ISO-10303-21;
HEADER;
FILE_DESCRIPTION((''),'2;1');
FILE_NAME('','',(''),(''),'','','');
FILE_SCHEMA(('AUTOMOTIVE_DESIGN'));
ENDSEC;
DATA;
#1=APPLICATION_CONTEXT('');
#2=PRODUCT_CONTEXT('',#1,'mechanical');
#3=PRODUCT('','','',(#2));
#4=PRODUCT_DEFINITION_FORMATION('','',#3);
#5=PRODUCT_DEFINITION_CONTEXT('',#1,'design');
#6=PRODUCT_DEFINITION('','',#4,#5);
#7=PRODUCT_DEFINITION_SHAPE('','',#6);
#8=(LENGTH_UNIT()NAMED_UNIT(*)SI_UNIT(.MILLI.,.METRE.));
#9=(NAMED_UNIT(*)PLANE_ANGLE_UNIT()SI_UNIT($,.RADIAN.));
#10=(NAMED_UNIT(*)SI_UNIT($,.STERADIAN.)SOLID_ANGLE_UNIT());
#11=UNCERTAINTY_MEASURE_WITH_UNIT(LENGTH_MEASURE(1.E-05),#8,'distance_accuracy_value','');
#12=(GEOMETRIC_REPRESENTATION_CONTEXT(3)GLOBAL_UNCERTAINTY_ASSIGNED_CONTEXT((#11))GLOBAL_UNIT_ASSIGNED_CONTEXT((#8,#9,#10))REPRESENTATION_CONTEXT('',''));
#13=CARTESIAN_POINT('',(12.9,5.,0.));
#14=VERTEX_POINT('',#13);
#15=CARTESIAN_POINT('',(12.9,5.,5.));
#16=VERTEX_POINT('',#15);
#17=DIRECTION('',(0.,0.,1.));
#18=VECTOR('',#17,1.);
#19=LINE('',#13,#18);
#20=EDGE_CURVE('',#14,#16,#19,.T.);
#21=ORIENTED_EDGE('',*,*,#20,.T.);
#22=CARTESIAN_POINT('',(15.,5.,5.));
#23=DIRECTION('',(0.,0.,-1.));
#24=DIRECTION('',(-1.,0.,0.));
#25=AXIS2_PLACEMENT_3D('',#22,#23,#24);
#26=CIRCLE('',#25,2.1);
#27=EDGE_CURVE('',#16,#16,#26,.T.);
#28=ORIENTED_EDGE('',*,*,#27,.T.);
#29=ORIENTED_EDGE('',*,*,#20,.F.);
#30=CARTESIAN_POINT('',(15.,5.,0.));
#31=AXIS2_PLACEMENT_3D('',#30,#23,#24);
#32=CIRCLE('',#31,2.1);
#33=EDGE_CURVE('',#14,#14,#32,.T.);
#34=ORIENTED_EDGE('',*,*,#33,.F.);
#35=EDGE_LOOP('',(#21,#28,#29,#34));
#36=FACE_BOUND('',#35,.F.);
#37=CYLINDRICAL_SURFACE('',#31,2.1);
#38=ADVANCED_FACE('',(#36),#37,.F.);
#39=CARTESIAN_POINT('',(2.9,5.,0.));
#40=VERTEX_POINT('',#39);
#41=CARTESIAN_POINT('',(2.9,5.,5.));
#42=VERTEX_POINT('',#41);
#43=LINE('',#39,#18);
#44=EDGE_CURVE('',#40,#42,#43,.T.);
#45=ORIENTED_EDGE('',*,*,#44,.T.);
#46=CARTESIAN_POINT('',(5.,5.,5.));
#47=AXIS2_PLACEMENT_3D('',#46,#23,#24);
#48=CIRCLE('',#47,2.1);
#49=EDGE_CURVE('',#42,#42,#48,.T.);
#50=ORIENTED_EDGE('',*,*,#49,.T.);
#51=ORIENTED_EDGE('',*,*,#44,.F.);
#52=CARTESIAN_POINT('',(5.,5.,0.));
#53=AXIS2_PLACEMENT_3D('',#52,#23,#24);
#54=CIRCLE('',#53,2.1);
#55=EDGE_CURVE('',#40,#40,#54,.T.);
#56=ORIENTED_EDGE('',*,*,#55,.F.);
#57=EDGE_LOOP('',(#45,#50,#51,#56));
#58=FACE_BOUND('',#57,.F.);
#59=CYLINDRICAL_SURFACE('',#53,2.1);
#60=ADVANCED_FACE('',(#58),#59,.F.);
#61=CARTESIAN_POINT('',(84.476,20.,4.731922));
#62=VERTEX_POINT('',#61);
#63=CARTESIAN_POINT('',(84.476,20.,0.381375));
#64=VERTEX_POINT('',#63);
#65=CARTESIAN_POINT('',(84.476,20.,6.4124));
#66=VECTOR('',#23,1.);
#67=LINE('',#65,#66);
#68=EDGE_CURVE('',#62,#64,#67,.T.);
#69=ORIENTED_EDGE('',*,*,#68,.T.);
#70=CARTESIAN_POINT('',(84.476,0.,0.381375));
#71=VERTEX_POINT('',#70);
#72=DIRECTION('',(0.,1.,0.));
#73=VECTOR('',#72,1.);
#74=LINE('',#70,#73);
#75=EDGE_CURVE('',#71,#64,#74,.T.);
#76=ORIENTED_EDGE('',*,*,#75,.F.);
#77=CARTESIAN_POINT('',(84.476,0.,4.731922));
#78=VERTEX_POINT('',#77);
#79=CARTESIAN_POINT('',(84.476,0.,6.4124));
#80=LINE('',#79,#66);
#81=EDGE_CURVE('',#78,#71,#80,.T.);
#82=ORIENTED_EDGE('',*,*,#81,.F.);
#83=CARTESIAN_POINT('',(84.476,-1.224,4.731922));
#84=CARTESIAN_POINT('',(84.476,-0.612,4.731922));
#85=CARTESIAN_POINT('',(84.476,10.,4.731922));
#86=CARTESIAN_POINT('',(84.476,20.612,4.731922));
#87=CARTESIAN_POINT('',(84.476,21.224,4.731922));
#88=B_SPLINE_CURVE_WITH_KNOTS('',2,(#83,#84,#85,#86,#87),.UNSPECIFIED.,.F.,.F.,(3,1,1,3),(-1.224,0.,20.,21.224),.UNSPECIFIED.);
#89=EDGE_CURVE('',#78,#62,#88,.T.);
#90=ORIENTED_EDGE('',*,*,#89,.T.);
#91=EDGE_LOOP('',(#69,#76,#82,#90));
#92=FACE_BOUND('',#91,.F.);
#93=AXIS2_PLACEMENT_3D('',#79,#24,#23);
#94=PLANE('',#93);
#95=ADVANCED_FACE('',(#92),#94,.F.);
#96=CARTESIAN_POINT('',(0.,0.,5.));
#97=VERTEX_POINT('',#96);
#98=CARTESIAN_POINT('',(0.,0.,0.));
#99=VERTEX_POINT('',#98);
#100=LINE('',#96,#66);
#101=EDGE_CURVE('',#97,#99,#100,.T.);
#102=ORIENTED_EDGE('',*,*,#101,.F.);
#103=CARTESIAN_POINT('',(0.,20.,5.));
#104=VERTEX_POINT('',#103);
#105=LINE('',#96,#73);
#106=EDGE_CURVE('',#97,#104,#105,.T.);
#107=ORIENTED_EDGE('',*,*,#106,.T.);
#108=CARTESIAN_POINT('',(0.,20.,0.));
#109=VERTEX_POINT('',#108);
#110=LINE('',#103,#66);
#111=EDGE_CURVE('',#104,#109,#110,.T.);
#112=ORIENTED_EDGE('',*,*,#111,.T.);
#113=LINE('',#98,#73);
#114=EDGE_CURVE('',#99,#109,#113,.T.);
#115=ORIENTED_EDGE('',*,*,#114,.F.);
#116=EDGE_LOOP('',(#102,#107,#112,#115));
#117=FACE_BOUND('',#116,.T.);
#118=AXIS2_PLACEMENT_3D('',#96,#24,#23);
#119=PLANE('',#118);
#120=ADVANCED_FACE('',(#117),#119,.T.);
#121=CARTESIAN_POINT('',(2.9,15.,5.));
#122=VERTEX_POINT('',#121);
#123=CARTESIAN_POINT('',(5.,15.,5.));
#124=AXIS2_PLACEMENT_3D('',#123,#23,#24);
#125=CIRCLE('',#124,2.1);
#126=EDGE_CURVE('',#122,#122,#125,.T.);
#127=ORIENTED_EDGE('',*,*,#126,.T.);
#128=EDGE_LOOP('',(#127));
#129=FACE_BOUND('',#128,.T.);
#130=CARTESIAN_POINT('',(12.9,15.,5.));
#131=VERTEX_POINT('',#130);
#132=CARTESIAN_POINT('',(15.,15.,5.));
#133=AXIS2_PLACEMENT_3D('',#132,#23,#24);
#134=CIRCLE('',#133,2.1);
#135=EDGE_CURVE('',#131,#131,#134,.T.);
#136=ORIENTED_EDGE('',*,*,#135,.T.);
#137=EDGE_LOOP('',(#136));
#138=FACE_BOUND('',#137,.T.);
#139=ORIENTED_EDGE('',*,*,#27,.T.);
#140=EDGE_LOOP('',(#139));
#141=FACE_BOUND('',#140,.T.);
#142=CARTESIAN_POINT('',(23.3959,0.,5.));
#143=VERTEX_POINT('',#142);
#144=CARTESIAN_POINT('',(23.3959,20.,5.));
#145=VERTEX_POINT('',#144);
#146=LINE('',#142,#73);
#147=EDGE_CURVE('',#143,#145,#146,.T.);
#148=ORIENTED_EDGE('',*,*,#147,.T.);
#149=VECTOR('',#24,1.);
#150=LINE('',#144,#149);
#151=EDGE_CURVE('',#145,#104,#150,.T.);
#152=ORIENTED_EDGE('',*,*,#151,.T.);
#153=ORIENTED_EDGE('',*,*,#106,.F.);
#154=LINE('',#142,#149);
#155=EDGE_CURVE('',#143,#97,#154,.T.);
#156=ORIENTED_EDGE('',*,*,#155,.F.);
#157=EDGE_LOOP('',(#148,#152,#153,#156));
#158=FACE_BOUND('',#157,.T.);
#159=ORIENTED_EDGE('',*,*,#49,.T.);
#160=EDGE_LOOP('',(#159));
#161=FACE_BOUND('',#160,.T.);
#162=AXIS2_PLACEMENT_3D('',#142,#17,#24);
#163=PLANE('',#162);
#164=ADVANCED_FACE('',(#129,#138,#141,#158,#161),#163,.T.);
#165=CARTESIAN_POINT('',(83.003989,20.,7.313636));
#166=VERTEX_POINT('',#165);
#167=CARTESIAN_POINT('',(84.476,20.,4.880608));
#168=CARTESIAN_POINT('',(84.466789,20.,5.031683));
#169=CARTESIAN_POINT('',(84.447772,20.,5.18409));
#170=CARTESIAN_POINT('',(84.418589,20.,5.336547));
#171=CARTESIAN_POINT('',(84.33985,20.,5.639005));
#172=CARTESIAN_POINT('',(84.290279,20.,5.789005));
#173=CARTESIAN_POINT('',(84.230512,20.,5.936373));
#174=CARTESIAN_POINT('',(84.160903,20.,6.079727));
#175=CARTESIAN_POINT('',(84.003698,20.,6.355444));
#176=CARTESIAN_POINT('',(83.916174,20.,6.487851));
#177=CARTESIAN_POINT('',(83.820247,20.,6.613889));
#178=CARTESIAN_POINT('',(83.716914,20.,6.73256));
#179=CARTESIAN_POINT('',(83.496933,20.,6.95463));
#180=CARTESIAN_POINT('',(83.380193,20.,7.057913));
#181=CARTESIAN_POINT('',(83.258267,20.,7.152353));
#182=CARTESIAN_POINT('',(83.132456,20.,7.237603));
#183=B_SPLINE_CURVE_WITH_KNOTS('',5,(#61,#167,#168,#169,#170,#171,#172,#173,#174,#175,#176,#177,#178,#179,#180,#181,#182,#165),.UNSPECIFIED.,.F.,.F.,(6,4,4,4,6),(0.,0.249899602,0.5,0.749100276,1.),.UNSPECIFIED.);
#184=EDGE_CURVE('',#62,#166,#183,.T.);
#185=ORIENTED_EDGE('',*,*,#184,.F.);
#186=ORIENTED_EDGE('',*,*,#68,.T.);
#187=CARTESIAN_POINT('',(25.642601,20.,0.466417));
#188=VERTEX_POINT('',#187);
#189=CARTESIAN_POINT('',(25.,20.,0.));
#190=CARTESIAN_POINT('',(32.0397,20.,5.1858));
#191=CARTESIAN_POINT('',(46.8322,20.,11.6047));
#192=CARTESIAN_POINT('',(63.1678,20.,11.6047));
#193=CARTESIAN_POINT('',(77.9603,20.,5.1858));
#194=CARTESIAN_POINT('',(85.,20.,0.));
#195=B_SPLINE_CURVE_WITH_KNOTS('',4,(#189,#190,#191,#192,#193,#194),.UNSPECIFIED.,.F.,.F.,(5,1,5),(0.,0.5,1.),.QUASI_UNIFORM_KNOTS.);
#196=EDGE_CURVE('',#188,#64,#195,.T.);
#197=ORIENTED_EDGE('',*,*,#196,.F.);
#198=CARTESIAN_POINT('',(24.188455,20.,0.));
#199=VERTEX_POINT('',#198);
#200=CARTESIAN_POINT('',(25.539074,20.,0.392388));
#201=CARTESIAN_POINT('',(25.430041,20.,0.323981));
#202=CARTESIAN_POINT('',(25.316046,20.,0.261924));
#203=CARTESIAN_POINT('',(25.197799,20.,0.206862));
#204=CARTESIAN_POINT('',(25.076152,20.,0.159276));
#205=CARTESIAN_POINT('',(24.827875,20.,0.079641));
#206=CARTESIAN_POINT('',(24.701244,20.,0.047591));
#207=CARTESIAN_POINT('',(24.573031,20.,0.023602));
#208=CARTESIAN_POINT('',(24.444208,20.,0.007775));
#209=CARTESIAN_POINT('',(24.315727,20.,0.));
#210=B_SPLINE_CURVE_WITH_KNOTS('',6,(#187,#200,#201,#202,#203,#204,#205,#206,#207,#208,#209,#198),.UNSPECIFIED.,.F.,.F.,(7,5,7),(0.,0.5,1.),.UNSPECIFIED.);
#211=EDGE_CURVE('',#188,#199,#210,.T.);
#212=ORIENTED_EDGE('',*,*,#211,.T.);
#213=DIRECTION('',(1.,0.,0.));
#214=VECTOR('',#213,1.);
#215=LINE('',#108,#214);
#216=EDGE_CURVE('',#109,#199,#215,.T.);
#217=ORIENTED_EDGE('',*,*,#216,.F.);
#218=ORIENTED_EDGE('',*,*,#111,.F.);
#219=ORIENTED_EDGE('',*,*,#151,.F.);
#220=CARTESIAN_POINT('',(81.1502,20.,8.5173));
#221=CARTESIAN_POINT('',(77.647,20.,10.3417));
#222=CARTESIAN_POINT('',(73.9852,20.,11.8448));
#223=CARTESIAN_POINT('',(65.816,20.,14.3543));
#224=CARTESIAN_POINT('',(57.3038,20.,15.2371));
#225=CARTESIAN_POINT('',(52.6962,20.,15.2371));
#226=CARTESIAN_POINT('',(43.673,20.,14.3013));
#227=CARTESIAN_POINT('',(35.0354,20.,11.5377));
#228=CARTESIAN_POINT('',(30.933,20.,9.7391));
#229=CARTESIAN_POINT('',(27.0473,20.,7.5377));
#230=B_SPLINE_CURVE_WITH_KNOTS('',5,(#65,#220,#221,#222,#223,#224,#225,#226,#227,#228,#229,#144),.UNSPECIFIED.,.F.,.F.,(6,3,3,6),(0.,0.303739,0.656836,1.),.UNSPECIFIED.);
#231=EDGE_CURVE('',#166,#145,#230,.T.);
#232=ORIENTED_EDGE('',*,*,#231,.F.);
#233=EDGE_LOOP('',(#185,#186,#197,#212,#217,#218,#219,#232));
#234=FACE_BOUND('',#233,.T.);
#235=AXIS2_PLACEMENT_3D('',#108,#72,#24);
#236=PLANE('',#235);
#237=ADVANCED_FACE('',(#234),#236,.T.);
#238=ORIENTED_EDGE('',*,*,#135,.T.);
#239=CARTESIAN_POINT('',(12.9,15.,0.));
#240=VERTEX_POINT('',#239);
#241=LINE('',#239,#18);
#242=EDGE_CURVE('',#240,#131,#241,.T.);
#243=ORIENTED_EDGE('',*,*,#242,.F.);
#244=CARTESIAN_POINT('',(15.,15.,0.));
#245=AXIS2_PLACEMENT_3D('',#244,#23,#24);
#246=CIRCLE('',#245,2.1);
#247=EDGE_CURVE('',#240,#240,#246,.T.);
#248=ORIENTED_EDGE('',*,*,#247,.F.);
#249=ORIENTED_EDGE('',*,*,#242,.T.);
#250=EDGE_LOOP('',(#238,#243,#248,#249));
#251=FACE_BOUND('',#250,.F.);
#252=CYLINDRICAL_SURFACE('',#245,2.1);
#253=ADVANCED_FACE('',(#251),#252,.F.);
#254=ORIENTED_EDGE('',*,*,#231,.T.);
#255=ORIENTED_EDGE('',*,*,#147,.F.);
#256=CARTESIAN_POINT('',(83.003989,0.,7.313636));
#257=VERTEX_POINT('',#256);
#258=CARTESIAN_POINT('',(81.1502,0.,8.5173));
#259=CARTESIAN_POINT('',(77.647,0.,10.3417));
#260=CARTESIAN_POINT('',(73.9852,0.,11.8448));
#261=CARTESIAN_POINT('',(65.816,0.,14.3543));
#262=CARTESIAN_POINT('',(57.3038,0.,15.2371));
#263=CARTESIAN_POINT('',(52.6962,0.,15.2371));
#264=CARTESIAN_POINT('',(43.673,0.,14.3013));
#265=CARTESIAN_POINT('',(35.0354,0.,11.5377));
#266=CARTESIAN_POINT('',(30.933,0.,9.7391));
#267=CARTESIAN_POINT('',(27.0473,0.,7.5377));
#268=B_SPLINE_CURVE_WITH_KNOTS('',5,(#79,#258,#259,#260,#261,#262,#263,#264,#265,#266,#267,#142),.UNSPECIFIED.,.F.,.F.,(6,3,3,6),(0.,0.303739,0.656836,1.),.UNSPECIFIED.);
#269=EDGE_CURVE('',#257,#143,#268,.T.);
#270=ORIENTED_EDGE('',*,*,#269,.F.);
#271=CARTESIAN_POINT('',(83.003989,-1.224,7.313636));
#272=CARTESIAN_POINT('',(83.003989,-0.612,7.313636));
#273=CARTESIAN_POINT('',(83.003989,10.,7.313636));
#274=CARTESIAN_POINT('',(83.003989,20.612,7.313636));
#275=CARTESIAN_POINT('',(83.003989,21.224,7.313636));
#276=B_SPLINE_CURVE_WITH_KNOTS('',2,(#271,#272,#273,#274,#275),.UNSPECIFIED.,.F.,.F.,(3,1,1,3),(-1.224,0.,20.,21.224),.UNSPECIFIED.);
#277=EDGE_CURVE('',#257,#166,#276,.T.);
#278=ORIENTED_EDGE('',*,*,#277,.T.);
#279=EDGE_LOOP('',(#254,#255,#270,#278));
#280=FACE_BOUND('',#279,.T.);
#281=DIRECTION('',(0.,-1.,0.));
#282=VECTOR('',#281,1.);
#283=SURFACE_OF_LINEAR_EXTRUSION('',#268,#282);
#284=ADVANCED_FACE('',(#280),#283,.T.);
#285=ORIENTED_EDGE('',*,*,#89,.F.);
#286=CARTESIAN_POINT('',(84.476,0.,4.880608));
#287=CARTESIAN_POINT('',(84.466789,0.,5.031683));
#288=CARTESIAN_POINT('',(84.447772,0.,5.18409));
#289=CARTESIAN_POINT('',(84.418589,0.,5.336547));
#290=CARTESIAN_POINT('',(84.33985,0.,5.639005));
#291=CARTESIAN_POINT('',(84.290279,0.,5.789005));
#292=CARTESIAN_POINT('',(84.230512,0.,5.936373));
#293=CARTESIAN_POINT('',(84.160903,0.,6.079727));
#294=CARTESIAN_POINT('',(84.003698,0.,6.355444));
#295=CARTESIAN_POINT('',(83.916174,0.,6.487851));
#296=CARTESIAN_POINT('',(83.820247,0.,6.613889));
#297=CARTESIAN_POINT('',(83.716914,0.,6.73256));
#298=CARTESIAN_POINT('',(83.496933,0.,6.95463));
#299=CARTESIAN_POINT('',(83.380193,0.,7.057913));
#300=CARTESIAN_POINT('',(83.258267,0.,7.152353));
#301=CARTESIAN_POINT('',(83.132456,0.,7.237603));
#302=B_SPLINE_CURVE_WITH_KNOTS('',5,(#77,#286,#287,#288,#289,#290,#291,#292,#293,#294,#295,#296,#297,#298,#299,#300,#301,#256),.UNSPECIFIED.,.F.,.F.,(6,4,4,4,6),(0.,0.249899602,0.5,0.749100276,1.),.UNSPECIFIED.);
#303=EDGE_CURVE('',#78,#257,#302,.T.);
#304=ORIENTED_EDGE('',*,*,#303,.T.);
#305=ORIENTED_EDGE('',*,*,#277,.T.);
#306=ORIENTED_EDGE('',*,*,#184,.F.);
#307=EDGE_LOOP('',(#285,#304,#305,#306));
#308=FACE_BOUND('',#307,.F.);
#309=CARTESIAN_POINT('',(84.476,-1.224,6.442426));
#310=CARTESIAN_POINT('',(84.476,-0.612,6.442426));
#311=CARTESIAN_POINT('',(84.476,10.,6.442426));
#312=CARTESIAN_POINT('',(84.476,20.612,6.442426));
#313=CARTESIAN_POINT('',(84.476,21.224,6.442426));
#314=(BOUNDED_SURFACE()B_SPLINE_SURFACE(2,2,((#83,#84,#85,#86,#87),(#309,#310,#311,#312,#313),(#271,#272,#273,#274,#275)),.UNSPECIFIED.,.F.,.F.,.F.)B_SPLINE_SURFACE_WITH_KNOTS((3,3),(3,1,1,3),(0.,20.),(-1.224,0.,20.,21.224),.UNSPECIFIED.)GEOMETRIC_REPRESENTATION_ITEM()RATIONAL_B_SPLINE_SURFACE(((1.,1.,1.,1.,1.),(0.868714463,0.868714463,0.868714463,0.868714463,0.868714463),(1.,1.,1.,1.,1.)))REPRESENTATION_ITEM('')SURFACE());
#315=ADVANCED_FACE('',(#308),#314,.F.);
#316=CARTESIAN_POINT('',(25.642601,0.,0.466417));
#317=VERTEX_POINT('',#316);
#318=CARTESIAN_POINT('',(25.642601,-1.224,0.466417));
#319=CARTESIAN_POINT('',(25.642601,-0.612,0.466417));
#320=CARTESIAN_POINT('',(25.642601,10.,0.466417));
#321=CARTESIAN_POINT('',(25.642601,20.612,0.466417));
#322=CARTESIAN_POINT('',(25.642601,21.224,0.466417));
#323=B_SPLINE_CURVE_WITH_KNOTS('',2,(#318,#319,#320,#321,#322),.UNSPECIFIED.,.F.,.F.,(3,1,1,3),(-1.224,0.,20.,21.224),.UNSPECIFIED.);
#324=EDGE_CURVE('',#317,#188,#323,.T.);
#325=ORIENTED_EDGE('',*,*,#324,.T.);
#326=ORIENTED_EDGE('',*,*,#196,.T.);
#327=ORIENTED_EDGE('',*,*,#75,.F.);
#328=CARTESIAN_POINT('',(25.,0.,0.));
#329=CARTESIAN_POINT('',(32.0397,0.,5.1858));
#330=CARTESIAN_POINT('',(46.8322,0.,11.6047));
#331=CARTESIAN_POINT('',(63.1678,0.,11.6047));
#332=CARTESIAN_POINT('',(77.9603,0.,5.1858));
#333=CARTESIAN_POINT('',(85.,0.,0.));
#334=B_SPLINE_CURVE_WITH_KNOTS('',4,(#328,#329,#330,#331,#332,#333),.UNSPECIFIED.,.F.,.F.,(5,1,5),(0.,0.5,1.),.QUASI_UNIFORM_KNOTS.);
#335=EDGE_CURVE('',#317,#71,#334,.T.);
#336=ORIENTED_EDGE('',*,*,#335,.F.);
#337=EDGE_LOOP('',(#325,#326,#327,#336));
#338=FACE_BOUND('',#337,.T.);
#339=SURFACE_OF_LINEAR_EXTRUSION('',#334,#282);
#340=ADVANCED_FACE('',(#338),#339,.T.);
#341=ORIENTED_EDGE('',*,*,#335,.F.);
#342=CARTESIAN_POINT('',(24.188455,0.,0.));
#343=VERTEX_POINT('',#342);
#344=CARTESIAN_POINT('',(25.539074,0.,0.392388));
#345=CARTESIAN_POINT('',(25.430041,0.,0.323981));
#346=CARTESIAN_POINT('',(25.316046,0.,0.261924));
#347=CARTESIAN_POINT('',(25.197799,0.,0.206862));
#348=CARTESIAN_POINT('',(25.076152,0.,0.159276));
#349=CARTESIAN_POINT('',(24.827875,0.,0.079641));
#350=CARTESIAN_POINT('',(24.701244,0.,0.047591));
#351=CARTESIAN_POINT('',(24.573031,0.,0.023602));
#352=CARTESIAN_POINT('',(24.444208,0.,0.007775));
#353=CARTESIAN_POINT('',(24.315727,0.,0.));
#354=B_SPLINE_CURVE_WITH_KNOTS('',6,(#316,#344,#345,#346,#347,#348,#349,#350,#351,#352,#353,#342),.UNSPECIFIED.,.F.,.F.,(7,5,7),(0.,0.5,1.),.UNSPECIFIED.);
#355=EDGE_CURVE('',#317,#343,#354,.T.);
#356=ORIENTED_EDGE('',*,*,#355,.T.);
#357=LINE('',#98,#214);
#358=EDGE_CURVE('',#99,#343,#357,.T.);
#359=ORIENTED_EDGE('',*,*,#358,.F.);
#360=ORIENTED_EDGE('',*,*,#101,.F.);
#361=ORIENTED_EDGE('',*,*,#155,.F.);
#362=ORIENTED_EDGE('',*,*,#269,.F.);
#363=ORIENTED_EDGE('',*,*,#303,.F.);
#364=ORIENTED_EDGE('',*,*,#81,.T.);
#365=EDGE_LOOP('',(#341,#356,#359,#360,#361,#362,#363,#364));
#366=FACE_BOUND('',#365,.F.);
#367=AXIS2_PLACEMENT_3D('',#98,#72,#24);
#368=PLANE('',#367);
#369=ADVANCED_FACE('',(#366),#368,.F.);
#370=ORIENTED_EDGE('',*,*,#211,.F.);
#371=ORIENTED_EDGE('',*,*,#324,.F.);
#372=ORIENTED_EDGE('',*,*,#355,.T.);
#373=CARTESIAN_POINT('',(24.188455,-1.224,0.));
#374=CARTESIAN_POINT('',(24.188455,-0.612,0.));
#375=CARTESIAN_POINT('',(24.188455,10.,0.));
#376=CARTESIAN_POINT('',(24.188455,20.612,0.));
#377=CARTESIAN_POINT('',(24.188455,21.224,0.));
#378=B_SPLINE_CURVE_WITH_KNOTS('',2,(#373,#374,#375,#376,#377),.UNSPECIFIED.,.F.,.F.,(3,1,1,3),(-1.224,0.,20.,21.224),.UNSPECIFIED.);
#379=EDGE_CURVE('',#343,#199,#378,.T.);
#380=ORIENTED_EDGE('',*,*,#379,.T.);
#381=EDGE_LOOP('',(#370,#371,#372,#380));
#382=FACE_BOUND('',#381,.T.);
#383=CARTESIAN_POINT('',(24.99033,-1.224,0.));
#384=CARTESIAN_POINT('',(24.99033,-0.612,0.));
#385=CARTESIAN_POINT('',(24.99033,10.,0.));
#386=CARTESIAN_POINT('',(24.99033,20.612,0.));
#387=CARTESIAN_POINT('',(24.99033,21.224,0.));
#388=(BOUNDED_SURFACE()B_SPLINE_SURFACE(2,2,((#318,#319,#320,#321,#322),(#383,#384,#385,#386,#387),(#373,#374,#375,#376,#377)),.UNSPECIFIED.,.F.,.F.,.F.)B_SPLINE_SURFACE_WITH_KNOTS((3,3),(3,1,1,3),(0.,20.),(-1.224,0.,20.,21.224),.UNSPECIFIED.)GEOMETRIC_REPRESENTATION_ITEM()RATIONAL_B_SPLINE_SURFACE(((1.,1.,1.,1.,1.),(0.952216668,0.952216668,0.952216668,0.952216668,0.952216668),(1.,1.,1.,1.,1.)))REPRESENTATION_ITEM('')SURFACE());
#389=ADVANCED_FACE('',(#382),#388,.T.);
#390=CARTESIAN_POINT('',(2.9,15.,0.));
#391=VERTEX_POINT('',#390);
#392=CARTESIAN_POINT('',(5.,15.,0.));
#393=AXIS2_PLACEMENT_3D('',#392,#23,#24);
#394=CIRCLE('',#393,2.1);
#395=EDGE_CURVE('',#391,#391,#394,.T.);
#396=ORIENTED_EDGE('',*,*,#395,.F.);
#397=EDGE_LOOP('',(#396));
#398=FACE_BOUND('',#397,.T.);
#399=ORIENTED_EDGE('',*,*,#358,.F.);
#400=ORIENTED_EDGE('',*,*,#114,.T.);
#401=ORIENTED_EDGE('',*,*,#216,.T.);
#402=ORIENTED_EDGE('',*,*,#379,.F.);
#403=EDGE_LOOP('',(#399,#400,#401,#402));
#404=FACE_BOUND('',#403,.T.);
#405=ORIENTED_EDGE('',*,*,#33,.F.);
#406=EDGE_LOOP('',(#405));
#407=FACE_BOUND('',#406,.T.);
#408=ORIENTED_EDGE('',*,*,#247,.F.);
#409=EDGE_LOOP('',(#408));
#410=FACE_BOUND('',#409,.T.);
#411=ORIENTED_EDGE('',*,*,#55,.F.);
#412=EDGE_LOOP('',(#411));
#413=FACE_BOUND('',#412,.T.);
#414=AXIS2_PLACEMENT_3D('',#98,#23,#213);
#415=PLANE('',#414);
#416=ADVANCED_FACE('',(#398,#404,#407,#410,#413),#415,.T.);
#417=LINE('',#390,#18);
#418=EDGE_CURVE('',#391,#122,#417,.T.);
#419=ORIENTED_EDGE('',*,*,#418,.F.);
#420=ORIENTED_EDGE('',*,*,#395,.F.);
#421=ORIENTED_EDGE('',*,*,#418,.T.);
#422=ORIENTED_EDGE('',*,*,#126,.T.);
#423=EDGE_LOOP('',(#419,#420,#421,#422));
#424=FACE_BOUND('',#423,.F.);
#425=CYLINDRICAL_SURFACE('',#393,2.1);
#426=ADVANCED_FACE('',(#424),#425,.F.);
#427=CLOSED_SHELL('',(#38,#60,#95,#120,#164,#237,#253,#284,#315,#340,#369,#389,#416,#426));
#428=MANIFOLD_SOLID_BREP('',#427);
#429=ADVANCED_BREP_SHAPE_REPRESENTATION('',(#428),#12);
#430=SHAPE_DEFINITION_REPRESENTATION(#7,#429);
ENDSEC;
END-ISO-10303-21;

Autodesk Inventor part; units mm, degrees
ref_plane "YZ Plane" through (0, 0, 0) normal (1, 0, 0) x (0, 1, 0)
ref_plane "XZ Plane" through (0, 0, 0) normal (0, 1, 0) x (-1, 0, 0)
ref_plane "XY Plane" through (0, 0, 0) normal (0, 0, 1) x (1, 0, 0)
sketch "Sketch1" plane through (0, 0, 0) normal (0, 1, 0) x (-1, 0, 0)
  line L0 (0, 0) -> (-25, 0)
  spline S0 degree 4 poles (-25, 0) (-32.0397, 5.1858) (-46.8322, 11.6047) (-63.1678, 11.6047) (-77.9603, 5.1858) (-85, 0) knots 0 0 0 0 0 0.5 1 1 1 1 1
  line L1 (-48.6479, 10) -> (-61.3521, 10) construction
  arc A0 (-49.9441, 9.7453) -> (-60.0559, 9.7453) centre (-55, -40.3178) ccw construction
  line L2 (-55, -16.2069) -> (-55, 34.9248) construction
  line L3 (-70, -22.2053) -> (-70, 28.9302) construction
  circle A1 centre (-55, -40) radius 50 construction
  line L4 (-23.3959, 5) -> (0, 5)
  line L5 (-84.476, 6.4124) -> (-84.476, 0)
  line L6 (-84.476, 0) -> (-85, 0)
  line L7 (0, 5) -> (0, 0)
  spline S1 degree 5 poles (-84.476, 6.4124) (-81.1502, 8.5173) (-77.647, 10.3417) (-73.9852, 11.8448) (-65.816, 14.3543) (-57.3038, 15.2371) (-52.6962, 15.2371) (-43.673, 14.3013) (-35.0354, 11.5377) (-30.933, 9.7391) (-27.0473, 7.5377) (-23.3959, 4.9999) knots 0 0 0 0 0 0 0.303739 0.303739 0.303739 0.656836 0.656836 0.656836 1 1 1 1 1 1
  point P0 (-40, 7.697)
  point P1 (-55, 10)
  point P2 (-70, 7.697)
  point P3 (-84.476, 0.3814)
  dimension "d5" = 5
  dimension "d0" = 60
  dimension "d1" = 25
  dimension "d2" = 100
extrude "Extrusion1" add sketch "Sketch1" along normal blind 20 contours L0 S0 L5 S1 L4 L7
sketch "Sketch2" plane through (25, 0, 0) normal (0, 0, -1) x (-1, 0, 0)
  circle A0 centre (10, 15) radius 2.1
  line L0 (0, 20) -> (25, 20) projected
  line L1 (0, 0) -> (25, 0) projected
  line L2 (25, 0) -> (25, 20) projected
  line L3 (0, 20) -> (25, 20) projected
  line L4 (0, 0) -> (0, 20) projected
  circle A1 centre (20, 15) radius 2.1
  circle A2 centre (10, 5) radius 2.1
  circle A3 centre (20, 5) radius 2.1
  dimension "d8" = 4.2
  dimension "d11" = 10
  dimension "d14" = 10
  dimension "d17" = 10
  dimension "d18" = 5
extrude "Extrusion2" cut sketch "Sketch2" against normal up to surface (5 mm away) contours A0 | A1 | A2 | A3
fillet "Fillet1" radius 3 1 edges at (84.476, 10, 6.4124)
fillet "Fillet2" radius 2.5 1 edges at (25, 10, 0)
properties part number "Gripper_Concave_Finger"
